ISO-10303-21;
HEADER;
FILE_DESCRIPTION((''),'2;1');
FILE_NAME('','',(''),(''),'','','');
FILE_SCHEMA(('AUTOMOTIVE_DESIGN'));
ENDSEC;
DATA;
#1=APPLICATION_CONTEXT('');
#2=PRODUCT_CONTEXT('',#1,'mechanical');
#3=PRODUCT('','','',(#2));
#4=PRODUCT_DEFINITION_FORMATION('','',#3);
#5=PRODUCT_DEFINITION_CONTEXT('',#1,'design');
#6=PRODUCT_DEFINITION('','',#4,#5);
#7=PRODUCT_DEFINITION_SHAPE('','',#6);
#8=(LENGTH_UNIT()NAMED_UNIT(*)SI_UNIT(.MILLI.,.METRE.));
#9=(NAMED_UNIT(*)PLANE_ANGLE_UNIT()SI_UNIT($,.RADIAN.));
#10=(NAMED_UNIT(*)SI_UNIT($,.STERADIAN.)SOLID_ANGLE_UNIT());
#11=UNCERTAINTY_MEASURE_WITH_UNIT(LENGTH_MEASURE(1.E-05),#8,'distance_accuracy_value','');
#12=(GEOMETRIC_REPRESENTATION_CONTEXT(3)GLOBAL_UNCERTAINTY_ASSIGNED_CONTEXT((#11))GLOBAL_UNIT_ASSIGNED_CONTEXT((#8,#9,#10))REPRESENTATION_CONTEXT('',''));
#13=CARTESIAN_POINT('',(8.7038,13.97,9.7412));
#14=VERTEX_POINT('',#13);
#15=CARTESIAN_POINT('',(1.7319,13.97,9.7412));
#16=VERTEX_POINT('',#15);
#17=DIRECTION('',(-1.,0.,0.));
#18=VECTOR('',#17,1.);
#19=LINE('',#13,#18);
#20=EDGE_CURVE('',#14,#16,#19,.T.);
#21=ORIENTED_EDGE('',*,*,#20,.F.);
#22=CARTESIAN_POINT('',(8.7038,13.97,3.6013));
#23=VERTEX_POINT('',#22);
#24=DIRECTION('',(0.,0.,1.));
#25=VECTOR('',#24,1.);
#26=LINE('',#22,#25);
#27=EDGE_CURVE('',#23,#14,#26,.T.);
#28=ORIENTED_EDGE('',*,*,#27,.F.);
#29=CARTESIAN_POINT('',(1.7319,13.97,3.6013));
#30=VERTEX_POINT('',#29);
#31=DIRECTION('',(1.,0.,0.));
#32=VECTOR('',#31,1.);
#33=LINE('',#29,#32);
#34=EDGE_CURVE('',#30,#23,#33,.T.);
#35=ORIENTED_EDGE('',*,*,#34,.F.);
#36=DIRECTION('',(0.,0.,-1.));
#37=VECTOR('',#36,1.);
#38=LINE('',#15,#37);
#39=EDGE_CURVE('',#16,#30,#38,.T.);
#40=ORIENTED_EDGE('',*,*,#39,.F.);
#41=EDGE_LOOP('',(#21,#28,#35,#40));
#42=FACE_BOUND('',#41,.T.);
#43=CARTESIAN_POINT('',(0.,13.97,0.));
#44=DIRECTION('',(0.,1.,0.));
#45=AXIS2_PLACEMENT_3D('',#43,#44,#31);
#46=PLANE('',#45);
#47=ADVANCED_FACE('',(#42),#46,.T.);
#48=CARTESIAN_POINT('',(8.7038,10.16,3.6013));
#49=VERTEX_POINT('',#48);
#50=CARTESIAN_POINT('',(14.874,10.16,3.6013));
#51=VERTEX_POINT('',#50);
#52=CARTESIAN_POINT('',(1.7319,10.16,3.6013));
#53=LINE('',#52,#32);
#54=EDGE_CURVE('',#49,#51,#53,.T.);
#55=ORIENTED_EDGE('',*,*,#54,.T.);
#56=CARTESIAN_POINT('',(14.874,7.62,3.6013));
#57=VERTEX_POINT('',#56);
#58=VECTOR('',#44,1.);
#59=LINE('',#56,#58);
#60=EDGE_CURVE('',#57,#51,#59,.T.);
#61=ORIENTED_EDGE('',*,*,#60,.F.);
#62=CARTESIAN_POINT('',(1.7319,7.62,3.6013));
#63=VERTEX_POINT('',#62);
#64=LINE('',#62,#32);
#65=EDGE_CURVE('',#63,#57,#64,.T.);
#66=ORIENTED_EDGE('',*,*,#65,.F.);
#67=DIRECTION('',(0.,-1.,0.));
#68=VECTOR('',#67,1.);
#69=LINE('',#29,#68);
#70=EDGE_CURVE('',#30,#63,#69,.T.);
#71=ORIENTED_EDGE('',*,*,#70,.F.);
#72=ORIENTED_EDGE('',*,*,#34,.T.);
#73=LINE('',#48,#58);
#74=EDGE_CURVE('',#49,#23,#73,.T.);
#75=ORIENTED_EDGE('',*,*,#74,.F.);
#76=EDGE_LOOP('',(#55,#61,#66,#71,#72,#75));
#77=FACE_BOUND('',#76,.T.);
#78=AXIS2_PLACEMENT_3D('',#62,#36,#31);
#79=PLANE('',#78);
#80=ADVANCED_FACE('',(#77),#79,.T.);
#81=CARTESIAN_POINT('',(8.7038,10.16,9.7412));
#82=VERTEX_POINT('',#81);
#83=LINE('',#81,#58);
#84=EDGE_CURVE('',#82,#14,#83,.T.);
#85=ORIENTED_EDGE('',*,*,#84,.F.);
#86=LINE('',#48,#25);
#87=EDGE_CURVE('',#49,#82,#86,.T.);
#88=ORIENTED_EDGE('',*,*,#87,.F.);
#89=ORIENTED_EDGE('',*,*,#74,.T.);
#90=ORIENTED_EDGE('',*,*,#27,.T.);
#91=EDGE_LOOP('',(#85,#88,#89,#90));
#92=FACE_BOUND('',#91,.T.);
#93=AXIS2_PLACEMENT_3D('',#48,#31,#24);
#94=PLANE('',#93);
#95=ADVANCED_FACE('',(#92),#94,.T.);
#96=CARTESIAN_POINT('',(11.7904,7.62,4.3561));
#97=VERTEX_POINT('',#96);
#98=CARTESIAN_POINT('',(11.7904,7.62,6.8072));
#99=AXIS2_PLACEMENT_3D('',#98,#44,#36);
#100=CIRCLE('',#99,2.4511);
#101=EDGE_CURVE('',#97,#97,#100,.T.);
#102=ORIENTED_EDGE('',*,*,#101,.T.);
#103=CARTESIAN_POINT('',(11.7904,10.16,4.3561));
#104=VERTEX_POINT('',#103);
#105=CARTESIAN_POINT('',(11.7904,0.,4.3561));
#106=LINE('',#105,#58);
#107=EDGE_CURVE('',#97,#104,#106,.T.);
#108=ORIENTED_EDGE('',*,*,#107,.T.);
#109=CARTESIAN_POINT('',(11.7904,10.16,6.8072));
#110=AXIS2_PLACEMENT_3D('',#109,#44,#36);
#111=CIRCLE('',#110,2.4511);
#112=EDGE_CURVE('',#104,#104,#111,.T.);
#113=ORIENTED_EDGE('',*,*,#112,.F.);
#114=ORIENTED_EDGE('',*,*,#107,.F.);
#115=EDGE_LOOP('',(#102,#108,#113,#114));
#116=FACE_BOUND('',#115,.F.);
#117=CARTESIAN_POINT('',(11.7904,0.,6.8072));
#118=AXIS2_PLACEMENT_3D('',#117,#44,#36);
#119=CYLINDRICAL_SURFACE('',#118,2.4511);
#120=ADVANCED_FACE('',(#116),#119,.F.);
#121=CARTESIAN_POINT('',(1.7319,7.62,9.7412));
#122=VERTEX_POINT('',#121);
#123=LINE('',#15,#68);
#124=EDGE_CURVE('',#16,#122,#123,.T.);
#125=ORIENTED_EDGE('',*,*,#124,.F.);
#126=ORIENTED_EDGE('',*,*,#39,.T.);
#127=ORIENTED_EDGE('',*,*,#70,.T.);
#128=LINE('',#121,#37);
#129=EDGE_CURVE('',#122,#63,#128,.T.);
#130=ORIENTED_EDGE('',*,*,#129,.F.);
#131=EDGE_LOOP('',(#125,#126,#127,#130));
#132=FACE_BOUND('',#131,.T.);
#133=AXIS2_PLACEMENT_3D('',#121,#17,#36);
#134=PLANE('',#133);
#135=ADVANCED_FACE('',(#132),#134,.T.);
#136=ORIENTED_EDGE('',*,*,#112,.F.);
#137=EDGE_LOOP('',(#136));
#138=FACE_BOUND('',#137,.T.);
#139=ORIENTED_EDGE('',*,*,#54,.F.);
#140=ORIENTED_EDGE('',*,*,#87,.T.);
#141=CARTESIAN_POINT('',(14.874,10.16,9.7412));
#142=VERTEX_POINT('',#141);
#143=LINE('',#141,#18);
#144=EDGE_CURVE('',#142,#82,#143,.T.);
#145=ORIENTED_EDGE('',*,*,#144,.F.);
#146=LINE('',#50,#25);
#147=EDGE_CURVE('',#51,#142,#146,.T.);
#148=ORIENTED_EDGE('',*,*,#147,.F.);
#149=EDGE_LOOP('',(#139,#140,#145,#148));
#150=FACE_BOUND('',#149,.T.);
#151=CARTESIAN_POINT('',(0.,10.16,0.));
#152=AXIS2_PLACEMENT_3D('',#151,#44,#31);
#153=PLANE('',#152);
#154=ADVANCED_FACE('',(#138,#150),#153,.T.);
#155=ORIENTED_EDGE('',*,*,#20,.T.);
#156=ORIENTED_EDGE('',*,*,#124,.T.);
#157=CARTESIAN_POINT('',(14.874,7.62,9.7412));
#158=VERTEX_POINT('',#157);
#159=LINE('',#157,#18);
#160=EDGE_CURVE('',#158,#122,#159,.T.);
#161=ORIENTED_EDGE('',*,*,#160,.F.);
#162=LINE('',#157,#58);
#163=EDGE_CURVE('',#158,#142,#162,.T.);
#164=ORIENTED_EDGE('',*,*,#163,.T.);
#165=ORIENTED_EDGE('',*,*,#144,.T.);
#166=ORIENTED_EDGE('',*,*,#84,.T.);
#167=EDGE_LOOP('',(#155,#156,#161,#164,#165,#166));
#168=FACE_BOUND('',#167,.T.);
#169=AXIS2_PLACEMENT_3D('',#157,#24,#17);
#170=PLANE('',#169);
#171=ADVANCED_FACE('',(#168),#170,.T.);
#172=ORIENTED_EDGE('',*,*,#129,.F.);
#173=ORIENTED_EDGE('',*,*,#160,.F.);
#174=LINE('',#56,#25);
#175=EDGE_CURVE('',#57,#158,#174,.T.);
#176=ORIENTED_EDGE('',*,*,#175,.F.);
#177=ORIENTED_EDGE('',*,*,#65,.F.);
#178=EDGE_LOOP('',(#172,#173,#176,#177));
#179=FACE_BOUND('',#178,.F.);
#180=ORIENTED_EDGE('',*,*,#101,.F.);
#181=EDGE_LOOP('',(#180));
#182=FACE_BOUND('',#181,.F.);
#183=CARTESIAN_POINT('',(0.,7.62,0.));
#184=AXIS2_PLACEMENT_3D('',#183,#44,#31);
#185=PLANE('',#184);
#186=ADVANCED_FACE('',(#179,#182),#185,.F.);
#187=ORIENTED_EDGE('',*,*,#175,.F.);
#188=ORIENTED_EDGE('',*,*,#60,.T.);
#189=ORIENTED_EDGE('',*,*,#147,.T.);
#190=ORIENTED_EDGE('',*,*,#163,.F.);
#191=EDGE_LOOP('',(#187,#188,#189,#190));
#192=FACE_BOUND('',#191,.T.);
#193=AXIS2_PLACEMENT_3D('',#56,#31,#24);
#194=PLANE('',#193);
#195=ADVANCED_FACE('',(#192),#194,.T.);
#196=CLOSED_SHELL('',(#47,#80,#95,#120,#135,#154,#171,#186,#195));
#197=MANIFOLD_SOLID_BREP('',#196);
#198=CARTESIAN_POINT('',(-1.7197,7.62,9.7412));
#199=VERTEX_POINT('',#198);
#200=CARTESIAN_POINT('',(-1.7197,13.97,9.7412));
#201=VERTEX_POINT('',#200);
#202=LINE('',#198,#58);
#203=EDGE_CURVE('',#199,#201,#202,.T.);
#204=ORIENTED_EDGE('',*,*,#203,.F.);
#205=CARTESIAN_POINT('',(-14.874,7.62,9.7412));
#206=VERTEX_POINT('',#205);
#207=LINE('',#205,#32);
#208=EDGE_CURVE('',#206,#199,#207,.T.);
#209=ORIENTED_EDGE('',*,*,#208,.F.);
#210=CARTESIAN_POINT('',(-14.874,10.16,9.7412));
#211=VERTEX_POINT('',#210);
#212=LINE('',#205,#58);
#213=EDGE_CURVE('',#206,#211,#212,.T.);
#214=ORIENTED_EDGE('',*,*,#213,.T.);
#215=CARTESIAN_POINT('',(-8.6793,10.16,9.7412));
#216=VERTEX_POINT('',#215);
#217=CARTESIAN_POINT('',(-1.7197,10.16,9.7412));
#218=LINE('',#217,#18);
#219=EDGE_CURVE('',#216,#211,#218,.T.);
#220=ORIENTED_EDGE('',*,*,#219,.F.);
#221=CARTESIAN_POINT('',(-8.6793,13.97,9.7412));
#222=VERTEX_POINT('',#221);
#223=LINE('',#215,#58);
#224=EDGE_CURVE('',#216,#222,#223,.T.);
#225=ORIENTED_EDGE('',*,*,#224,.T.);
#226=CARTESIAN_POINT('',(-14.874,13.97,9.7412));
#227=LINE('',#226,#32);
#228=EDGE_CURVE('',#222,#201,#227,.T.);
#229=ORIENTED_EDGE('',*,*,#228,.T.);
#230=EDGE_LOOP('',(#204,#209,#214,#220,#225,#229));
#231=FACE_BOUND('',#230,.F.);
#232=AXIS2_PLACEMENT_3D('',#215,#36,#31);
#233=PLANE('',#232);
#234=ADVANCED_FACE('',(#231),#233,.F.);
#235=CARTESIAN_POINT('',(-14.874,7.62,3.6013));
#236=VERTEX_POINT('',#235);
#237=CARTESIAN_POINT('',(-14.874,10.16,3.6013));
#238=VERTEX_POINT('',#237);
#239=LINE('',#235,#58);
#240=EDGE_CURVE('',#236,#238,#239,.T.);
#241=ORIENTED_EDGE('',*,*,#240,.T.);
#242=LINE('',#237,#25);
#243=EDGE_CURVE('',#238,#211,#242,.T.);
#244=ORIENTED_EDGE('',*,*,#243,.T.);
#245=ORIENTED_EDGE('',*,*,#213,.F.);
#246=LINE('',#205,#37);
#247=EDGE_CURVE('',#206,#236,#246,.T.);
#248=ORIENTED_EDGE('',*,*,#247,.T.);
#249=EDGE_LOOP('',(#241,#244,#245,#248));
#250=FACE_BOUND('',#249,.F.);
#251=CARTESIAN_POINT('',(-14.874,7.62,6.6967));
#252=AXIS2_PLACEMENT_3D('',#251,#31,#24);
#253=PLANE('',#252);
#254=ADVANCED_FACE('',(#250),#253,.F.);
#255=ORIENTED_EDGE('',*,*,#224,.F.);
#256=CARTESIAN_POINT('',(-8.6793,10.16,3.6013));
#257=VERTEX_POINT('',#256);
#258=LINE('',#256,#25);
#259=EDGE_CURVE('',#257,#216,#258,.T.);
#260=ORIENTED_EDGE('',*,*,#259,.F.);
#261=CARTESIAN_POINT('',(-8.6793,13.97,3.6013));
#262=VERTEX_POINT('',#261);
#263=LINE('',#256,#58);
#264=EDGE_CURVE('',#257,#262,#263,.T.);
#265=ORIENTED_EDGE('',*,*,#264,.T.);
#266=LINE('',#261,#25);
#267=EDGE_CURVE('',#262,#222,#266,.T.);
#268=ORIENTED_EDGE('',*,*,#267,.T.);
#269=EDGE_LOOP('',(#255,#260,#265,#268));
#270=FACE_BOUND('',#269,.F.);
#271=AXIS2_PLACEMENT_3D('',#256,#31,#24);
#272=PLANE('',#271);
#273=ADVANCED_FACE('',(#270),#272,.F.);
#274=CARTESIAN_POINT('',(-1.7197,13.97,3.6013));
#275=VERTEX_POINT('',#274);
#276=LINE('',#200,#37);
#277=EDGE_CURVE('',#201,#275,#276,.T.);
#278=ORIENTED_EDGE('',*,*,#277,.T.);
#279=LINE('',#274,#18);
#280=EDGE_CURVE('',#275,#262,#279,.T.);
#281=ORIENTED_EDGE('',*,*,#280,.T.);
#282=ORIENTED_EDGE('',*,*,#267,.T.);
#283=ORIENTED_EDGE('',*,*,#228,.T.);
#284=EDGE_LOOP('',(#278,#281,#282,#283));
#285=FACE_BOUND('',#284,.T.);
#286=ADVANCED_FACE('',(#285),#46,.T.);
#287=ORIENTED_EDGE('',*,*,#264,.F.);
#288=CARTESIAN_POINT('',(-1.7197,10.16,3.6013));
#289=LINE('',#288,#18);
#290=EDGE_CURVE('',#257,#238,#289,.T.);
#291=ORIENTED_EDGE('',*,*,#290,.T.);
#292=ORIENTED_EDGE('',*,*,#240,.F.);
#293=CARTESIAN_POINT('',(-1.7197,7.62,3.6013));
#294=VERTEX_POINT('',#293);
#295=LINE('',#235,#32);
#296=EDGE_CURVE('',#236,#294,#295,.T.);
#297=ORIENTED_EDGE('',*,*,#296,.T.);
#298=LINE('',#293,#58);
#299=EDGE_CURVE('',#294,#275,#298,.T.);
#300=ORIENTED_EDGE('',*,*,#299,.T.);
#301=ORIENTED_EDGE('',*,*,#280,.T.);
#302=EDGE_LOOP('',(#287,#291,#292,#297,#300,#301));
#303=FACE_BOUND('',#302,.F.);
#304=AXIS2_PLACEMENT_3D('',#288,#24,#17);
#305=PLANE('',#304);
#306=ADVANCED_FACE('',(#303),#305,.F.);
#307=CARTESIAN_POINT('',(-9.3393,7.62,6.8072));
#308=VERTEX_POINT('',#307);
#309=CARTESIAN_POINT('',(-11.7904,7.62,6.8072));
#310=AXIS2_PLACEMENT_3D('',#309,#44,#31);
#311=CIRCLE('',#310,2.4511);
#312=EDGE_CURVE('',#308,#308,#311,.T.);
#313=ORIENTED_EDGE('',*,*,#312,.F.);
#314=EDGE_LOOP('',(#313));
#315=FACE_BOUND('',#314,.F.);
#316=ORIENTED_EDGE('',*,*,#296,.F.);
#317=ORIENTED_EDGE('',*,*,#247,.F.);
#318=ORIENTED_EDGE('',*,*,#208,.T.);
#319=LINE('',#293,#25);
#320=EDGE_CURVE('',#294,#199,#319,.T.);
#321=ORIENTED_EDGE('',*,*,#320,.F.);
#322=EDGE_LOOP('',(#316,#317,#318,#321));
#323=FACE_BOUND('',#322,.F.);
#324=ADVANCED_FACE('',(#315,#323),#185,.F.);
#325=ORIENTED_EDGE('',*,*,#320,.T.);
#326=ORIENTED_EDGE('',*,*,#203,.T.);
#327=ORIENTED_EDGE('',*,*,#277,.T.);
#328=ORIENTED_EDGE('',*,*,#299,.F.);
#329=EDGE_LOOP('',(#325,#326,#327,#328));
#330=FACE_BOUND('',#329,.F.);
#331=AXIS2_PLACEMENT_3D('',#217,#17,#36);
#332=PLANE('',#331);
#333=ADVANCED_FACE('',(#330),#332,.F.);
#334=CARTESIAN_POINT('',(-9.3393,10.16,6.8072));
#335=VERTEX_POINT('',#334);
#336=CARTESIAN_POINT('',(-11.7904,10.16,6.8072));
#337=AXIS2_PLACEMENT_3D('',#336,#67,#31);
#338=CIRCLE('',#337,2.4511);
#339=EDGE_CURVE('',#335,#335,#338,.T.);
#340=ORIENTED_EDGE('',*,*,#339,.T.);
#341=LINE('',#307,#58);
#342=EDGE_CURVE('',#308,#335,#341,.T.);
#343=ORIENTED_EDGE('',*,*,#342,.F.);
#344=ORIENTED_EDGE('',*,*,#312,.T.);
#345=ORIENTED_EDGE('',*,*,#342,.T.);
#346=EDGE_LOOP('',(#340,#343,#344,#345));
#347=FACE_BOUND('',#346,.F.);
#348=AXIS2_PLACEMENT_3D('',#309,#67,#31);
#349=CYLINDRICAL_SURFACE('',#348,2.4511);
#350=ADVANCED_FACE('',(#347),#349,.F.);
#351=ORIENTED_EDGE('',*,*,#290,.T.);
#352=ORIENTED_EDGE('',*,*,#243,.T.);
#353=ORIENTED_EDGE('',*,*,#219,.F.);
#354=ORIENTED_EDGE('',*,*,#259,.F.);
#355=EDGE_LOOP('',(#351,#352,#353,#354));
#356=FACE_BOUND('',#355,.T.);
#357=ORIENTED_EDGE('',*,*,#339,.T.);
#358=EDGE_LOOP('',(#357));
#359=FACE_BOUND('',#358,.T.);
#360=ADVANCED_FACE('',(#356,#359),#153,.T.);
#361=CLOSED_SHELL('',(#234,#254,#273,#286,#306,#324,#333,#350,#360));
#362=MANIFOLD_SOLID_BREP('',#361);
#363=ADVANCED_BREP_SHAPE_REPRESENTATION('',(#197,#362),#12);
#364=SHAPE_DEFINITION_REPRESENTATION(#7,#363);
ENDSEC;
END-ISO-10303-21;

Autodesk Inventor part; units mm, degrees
ref_plane "YZ Plane" through (0, 0, 0) normal (1, 0, 0) x (0, 1, 0)
ref_plane "XZ Plane" through (0, 0, 0) normal (0, 1, 0) x (-1, 0, 0)
ref_plane "XY Plane" through (0, 0, 0) normal (0, 0, 1) x (1, 0, 0)
ref_plane "Work Plane1" through (0, 0, 0) normal (0, -1, 0) x (1, 0, 0)
sketch "Sketch14" plane through (0, 0, 0) normal (0, -1, 0) x (1, 0, 0)
  circle A0 centre (11.7904, 6.8072) radius 2.4511 projected
  circle A1 centre (0, -13.6144) radius 2.4511 projected
  circle A2 centre (-11.7904, 6.8072) radius 2.4511 projected
  point P0 (0, 0)
ref_plane "Work Plane3" through (0, 0, 0) normal (0, -1, 0) x (1, 0, 0)
sketch "Sketch18" plane through (0, 0, 0) normal (0, -1, 0) x (1, 0, 0)
  circle A0 centre (-11.7904, 6.8072) radius 2.4511 projected
  circle A1 centre (-11.7904, 6.8072) radius 4.1697
  circle A2 centre (0, 0) radius 3.7517
  line L0 (-7.6207, 6.8072) -> (-7.6207, -16.064)
  circle A3 centre (0, 0) radius 17.78 projected
  line L1 (-7.6207, 6.8072) -> (-7.6207, 16.064)
  line L2 (-3.7517, 0) -> (-3.7517, -17.4687)
  line L3 (-3.7517, -17.4687) -> (-3.7517, 17.2429)
  circle A4 centre (11.7904, 6.8072) radius 2.4511 projected
  circle A5 centre (11.7904, 6.8072) radius 4.1697
  line L4 (7.6207, 6.8072) -> (7.6207, -16.064)
  line L5 (7.6207, 16.064) -> (7.6207, 6.8072)
  line L6 (-7.6207, 10.9769) -> (-3.7517, 10.9769)
  line L7 (-6.9141, -9.9949) -> (-3.7517, -9.9949)
  line L8 (-7.6207, -9.9949) -> (-6.5754, -9.9949)
  line L9 (3.7517, 10.9769) -> (7.6207, 10.9769)
  line L10 (3.7517, -9.9949) -> (7.6207, -9.9949)
  line L11 (0, 0) -> (3.7517, 0)
  line L12 (3.7517, 0) -> (3.7517, 10.8227)
  line L13 (3.7517, 10.8227) -> (3.7517, -9.9949)
  line L14 (3.7517, 10.8227) -> (3.7517, 10.9769)
  line L15 (7.6207, 10.9769) -> (3.7517, 10.9769)
  point P0 (3.7517, 0)
ref_plane "Work Plane4" through (0, 7.62, 0) normal (0, 1, 0) x (1, 0, 0)
sketch "Sketch19" plane through (0, 7.62, 0) normal (0, 1, 0) x (1, 0, 0)
  circle A0 centre (0, 0) radius 17.78 projected
  line L0 (1.7319, -3.6013) -> (14.874, -3.6013)
  line L1 (14.874, -3.6013) -> (14.874, -9.7412)
  line L2 (14.874, -9.7412) -> (1.7319, -9.7412)
  line L3 (1.7319, -9.7412) -> (1.7319, -3.6013)
extrude "Extrusion7" add sketch "Sketch19" along normal blind 2.54 contours L2 L3 L0 L1
ref_plane "Work Plane5" through (0, 10.16, 0) normal (0, 1, 0) x (1, 0, 0)
sketch "Sketch20" plane through (0, 10.16, 0) normal (0, 1, 0) x (1, 0, 0)
  circle A0 centre (11.7904, -6.8072) radius 2.4511 projected
  circle A1 centre (11.7904, -6.8072) radius 2.4511
  line L0 (7.6207, -3.6013) -> (14.874, -3.6013) projected
  line L1 (8.7038, -3.6013) -> (8.7038, -9.7412)
  line L2 (3.7517, -9.7412) -> (1.7319, -9.7412) projected
  line L3 (8.7038, -9.7412) -> (1.7319, -9.7412)
  line L4 (1.7319, -9.7412) -> (1.7319, -3.6013) projected
  line L5 (1.7319, -9.7412) -> (1.7319, -3.6013)
  line L6 (1.7319, -3.6013) -> (8.7038, -3.6013)
  point P0 (0, 0)
extrude "Extrusion8" add sketch "Sketch20" along normal blind 3.81 contours L0 L1 L3 L2 L4 L6
hole "Hole5" at (11.7904, 0, 6.8072) direction (0, 1, 0) diameter 4.9022 end through all
ref_plane "Work Plane2" through (0, 7.62, 0) normal (0, 1, 0) x (1, 0, 0)
sketch "Sketch21" plane through (0, 7.62, 0) normal (0, 1, 0) x (1, 0, 0)
  circle A0 centre (-11.7904, -6.8072) radius 2.4511 projected
  line L0 (-14.239, -6.6967) -> (-14.874, -6.6967)
  line L1 (1.7319, -9.7412) -> (1.7319, -3.6013) projected
  line L2 (1.7319, -3.6013) -> (-14.874, -3.6013)
  line L3 (-14.874, -3.6013) -> (-14.874, -6.6967)
  line L4 (1.7319, -9.7412) -> (-14.874, -9.7412)
  circle A1 centre (0, 0) radius 17.78 projected
  line L5 (-14.874, -6.6967) -> (-14.874, -9.7412)
  line L6 (-3.7517, 9.9949) -> (-3.7517, -10.9769) projected
  line L7 (-3.7517, -3.6013) -> (-1.7197, -3.6013)
  line L8 (-1.7197, -3.6013) -> (-1.7197, -9.7412)
  line L9 (-14.874, -9.7412) -> (-14.874, -3.6013)
  dimension "d67" = 0.635
  dimension "d68" = 2.032
extrude "Extrusion9" add sketch "Sketch21" along normal blind 2.54 contours L4 L6 L2 L8 | L4 L5 L3 L2 L6
sketch "Sketch22" plane through (0, 10.16, 0) normal (0, 1, 0) x (1, 0, 0)
  point P0 (0, 0)
sketch "Sketch23" plane through (0, 10.16, 0) normal (0, 1, 0) x (1, 0, 0)
  line L0 (8.7038, -3.6013) -> (1.7319, -3.6013) projected
  line L1 (-1.7197, -9.7412) -> (-1.7197, -3.6013) projected
  line L2 (-1.7197, -3.6013) -> (-8.6793, -3.6013)
  line L3 (-1.7197, -3.6013) -> (-14.874, -3.6013) projected
  line L4 (-8.6793, -3.6013) -> (-8.6793, -9.7412)
  line L5 (-14.874, -9.7412) -> (-1.7197, -9.7412) projected
  line L6 (-8.6793, -9.7412) -> (-1.7197, -9.7412)
  line L7 (-1.7197, -9.7412) -> (-1.7197, -3.6013)
  point P0 (0, 0)
  dimension "d71" = 6.9596
extrude "Extrusion10" add sketch "Sketch23" along normal blind 3.81
properties part number "cover"
